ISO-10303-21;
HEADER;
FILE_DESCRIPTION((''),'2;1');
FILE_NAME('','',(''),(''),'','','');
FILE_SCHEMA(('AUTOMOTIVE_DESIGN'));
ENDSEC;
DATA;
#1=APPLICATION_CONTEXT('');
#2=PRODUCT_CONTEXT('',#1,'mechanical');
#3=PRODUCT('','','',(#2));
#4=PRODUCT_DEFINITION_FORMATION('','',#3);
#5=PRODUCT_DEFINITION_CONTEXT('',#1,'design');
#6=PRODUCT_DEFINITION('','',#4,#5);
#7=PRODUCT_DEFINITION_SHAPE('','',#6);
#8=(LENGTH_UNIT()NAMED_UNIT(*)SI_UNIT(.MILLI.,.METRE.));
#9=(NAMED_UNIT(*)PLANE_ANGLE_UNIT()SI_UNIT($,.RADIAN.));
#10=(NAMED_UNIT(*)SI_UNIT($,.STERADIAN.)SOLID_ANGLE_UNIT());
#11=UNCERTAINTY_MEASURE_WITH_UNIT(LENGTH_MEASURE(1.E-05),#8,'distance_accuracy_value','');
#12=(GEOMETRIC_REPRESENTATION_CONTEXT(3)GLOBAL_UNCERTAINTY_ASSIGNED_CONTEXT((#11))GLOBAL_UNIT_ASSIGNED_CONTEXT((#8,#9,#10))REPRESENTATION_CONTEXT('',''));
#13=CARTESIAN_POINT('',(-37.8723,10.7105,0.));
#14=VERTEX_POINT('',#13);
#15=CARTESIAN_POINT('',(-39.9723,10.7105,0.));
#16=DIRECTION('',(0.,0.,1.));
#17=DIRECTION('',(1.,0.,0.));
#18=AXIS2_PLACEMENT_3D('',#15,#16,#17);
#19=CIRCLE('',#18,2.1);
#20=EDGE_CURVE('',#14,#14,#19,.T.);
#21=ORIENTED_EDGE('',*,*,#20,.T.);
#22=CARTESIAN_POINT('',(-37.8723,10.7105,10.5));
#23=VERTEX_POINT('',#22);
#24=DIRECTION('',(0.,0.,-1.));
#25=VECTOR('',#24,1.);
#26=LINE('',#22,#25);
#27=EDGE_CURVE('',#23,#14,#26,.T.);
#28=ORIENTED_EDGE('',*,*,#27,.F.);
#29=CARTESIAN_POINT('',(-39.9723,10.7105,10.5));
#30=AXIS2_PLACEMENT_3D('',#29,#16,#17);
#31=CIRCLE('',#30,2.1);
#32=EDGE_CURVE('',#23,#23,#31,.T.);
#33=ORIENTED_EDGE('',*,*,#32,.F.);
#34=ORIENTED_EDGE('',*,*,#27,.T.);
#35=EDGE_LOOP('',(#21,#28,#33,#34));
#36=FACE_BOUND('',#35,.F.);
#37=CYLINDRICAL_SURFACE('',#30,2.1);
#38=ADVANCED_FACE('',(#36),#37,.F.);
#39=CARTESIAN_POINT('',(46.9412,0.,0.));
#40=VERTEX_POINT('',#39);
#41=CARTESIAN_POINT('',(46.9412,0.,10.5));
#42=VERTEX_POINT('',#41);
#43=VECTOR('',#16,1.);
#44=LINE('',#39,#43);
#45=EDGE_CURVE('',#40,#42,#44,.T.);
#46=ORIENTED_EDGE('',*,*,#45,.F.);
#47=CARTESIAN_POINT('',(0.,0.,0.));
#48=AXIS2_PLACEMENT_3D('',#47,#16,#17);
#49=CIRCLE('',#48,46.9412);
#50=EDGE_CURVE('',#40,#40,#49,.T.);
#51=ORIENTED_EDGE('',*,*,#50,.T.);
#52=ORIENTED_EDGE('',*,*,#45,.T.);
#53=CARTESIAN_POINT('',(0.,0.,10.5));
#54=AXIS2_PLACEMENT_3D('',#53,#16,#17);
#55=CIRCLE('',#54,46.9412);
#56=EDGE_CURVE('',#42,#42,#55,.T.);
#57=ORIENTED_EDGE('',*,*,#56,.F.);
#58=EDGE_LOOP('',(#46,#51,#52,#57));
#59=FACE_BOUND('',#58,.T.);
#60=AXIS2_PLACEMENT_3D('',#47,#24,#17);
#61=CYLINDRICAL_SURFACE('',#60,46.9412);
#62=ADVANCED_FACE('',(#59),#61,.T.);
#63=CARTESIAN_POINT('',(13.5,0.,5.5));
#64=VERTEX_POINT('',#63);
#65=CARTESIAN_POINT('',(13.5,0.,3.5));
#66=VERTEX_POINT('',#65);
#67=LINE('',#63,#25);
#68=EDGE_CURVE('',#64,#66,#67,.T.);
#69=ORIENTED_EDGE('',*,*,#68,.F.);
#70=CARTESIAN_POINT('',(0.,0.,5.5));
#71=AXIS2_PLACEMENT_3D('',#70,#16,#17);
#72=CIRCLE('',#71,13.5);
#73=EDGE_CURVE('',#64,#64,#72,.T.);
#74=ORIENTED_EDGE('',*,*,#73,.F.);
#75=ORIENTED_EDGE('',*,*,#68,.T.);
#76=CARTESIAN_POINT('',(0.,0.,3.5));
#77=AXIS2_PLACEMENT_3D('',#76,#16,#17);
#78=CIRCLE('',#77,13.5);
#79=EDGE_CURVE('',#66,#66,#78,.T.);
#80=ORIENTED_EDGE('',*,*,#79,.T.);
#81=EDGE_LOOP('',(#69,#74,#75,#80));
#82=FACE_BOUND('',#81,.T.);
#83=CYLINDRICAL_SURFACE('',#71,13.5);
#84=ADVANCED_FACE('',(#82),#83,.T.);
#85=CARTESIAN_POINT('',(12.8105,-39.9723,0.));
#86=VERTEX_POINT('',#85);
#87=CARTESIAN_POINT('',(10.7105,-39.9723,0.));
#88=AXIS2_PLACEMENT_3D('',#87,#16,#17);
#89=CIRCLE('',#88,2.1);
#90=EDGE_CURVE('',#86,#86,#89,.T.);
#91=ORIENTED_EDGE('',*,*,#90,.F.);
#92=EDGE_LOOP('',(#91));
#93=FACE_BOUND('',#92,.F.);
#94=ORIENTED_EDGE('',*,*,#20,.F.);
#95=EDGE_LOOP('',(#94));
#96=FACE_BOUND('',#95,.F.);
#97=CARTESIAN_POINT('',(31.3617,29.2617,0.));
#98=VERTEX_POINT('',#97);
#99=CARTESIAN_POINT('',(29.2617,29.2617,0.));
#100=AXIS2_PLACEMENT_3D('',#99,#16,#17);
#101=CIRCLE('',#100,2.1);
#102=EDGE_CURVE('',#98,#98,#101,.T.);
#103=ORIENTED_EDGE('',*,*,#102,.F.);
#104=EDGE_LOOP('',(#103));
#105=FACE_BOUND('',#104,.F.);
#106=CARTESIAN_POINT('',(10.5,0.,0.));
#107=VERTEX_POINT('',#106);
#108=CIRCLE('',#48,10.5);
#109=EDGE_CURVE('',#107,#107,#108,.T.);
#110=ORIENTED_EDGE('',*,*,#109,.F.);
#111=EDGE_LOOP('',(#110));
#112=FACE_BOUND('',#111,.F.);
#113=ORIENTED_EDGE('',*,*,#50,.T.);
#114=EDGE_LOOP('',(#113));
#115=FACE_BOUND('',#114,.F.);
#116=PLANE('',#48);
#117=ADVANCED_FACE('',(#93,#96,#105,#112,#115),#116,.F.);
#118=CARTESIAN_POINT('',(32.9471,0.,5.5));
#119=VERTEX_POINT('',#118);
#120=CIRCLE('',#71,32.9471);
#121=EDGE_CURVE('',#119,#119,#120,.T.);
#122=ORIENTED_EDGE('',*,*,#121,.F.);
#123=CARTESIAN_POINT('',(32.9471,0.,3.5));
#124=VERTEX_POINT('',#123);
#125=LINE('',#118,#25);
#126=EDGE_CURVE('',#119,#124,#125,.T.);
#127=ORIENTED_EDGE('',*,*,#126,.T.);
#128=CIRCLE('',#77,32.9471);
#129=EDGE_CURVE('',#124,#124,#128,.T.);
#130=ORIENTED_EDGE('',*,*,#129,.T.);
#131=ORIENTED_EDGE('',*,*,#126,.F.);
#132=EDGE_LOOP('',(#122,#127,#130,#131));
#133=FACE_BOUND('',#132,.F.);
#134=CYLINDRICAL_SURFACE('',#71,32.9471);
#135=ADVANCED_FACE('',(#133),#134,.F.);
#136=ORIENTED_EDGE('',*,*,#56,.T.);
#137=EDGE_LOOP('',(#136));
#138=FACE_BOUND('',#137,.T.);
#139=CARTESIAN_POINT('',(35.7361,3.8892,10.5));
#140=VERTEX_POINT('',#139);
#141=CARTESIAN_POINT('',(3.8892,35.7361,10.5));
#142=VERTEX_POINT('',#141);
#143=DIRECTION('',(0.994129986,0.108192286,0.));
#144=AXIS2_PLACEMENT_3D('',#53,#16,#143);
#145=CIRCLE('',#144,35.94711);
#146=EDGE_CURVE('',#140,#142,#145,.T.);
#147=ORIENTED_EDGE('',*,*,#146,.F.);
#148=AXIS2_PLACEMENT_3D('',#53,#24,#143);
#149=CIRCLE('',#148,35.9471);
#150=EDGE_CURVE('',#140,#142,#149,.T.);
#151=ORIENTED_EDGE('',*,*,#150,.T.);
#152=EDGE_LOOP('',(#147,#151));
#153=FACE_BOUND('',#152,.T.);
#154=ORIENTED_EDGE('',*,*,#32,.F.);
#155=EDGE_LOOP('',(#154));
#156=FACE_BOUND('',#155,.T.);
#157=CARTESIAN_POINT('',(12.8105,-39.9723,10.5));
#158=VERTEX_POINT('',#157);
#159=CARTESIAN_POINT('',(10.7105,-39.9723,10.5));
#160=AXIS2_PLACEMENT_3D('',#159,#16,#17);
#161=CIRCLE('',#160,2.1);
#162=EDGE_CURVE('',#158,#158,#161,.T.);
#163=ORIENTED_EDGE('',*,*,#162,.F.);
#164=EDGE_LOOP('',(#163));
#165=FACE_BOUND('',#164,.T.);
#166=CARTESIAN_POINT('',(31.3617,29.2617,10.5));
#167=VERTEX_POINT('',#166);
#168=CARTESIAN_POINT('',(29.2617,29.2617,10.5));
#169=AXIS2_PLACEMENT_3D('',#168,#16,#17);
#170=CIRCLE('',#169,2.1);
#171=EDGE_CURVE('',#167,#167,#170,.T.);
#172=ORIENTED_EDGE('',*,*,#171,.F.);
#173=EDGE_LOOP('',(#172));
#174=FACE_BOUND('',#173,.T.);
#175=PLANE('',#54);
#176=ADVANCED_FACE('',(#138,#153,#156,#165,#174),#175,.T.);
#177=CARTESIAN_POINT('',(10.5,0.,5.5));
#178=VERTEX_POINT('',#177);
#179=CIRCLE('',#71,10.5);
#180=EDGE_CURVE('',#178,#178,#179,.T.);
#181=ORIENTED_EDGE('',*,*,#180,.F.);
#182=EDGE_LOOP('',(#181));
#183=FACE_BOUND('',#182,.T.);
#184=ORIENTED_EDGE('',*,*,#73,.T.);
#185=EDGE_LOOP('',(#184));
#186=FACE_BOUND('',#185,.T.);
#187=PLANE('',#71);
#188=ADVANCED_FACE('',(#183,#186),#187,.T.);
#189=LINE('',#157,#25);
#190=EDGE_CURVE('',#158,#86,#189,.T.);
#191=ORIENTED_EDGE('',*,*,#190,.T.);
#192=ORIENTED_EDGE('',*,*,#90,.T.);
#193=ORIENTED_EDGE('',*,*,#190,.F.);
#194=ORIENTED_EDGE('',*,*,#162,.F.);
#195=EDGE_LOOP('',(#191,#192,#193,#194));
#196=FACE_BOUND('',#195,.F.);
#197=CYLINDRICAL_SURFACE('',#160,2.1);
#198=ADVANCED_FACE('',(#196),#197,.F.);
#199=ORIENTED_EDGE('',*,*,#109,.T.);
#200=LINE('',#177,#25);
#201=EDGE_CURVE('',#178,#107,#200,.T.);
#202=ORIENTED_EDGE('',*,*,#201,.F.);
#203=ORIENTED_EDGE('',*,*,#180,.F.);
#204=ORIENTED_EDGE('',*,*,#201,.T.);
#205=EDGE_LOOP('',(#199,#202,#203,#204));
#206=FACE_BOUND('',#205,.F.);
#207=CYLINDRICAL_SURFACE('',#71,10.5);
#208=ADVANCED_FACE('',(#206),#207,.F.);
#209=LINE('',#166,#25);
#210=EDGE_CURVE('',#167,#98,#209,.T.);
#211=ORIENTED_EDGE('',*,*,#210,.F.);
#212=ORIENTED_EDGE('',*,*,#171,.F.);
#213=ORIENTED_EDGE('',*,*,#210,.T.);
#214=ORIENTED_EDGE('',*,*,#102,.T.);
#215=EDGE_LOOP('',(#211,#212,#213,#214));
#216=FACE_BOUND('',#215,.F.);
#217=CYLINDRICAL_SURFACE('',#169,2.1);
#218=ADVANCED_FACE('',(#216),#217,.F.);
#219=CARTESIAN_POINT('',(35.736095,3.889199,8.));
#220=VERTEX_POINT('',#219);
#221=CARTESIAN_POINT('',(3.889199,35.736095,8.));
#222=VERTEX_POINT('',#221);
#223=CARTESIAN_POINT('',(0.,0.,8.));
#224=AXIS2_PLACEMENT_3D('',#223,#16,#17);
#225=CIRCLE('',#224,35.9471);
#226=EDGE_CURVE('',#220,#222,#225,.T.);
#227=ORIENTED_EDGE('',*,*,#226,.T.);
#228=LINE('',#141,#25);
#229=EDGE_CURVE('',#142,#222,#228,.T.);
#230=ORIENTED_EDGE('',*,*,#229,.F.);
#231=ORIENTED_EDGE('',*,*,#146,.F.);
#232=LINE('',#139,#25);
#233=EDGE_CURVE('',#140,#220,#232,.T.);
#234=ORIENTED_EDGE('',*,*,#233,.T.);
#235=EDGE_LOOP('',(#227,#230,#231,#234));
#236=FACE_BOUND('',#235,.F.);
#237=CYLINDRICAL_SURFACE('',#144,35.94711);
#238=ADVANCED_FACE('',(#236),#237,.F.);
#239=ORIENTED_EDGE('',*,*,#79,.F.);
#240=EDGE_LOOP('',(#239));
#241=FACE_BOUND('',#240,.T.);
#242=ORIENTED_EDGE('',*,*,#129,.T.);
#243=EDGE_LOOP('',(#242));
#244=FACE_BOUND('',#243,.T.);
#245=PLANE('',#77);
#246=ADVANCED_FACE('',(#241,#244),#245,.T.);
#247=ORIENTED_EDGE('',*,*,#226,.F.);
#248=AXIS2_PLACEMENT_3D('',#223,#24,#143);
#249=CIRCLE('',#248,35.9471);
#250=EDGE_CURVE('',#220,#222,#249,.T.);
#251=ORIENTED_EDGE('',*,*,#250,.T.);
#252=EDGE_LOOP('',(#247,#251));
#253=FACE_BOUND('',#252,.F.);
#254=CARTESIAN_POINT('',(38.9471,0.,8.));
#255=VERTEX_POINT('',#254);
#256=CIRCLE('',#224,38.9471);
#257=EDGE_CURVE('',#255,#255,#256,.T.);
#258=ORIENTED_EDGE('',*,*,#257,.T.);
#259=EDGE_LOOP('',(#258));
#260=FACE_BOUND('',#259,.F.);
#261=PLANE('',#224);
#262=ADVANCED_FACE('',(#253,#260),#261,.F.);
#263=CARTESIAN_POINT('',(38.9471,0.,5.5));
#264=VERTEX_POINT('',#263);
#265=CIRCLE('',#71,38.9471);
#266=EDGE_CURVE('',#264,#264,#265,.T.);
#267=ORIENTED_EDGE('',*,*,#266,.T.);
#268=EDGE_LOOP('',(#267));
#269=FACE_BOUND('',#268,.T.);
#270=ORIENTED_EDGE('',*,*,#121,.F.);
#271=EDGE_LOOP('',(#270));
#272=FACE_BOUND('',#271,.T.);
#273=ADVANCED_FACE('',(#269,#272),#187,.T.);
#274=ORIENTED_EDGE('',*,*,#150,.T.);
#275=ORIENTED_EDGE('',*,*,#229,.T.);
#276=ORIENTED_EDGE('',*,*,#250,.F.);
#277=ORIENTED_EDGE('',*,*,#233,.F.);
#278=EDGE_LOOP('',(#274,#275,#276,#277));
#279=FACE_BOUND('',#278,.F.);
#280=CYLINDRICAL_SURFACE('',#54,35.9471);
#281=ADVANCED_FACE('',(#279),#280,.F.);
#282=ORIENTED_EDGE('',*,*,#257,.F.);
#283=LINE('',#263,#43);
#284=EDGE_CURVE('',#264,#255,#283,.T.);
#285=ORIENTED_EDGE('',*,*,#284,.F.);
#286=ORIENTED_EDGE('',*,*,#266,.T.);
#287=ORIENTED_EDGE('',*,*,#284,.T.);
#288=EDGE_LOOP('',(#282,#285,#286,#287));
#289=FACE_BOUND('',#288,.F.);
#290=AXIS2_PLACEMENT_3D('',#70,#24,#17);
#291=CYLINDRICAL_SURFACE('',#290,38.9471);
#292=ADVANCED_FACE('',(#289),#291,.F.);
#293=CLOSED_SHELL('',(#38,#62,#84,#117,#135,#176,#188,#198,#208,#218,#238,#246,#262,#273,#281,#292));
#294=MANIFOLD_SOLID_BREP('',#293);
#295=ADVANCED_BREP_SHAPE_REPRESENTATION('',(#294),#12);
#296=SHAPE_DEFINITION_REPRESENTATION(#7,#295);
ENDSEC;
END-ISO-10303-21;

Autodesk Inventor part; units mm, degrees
ref_plane "YZ Plane" through (0, 0, 0) normal (1, 0, 0) x (0, 1, 0)
ref_plane "XZ Plane" through (0, 0, 0) normal (0, 1, 0) x (-1, 0, 0)
ref_plane "XY Plane" through (0, 0, 0) normal (0, 0, 1) x (1, 0, 0)
sketch "スケッチ1" plane through (0, 0, 0) normal (0, 0, 1) x (1, 0, 0)
  circle A0 centre (0, 0) radius 46.9412
  dimension "d3" = 93.8824
extrude "押し出し1" add sketch "スケッチ1" along normal blind 10.5
sketch "スケッチ2" plane through (0, 0, 10.5) normal (0, 0, 1) x (1, 0, 0)
  circle A0 centre (0, 0) radius 46.9412
  arc A1 (35.7361, 3.8892) -> (3.8892, 35.7361) centre (0, 0) ccw
  circle A2 centre (29.2617, 29.2617) radius 2.1
  circle A3 centre (-39.9723, 10.7105) radius 2.1
  circle A4 centre (10.7105, -39.9723) radius 2.1
  circle A5 centre (0, 0) radius 35.9471
  dimension "d4" = 4.2
extrude "押し出し2" cut sketch "スケッチ2" against normal blind 5 contours A5 A1
sketch "スケッチ3" plane through (0, 0, 10.5) normal (0, 0, 1) x (1, 0, 0)
  circle A0 centre (0, 0) radius 46.9412
  arc A1 (-5.0225, 35.5945) -> (35.5945, -5.0225) centre (0, 0) ccw
  arc A2 (35.7361, 3.8892) -> (3.8892, 35.7361) centre (0, 0) ccw
  circle A3 centre (29.2617, 29.2617) radius 2.1
  circle A4 centre (-39.9723, 10.7105) radius 2.1
  circle A5 centre (10.7105, -39.9723) radius 2.1
  circle A6 centre (0, 0) radius 35.9471
  dimension "d7" = 4.2
extrude "押し出し3" cut sketch "スケッチ3" against normal blind 10.5 contours A3 | A4 | A5
sketch "スケッチ4" plane through (0, 0, 5.5) normal (0, 0, 1) x (1, 0, 0)
  circle A0 centre (0, 0) radius 10.5
  circle A1 centre (0, 0) radius 10.5
extrude "押し出し4" cut sketch "スケッチ4" against normal blind 10.5
sketch "スケッチ5" plane through (0, 0, 5.5) normal (0, 0, 1) x (1, 0, 0)
  circle A0 centre (0, 0) radius 10.5 projected
  circle A1 centre (0, 0) radius 35.9471 projected
  circle A2 centre (0, 0) radius 13.5
  circle A3 centre (0, 0) radius 32.9471
  dimension "d12" = 3
  dimension "d13" = 3
extrude "押し出し5" cut sketch "スケッチ5" against normal blind 2 contours A3
sketch "スケッチ6" plane through (0, 0, 5.5) normal (0, 0, 1) x (1, 0, 0)
  point P0 (0, 0)
sketch "スケッチ7" plane through (0, 0, 5.5) normal (0, 0, 1) x (1, 0, 0)
  circle A0 centre (0, 0) radius 38.9471
  circle A1 centre (0, 0) radius 35.9471 projected
  dimension "d16" = 3
extrude "押し出し6" cut sketch "スケッチ7" along normal blind 2.5
properties part number "fix_plate_2"
